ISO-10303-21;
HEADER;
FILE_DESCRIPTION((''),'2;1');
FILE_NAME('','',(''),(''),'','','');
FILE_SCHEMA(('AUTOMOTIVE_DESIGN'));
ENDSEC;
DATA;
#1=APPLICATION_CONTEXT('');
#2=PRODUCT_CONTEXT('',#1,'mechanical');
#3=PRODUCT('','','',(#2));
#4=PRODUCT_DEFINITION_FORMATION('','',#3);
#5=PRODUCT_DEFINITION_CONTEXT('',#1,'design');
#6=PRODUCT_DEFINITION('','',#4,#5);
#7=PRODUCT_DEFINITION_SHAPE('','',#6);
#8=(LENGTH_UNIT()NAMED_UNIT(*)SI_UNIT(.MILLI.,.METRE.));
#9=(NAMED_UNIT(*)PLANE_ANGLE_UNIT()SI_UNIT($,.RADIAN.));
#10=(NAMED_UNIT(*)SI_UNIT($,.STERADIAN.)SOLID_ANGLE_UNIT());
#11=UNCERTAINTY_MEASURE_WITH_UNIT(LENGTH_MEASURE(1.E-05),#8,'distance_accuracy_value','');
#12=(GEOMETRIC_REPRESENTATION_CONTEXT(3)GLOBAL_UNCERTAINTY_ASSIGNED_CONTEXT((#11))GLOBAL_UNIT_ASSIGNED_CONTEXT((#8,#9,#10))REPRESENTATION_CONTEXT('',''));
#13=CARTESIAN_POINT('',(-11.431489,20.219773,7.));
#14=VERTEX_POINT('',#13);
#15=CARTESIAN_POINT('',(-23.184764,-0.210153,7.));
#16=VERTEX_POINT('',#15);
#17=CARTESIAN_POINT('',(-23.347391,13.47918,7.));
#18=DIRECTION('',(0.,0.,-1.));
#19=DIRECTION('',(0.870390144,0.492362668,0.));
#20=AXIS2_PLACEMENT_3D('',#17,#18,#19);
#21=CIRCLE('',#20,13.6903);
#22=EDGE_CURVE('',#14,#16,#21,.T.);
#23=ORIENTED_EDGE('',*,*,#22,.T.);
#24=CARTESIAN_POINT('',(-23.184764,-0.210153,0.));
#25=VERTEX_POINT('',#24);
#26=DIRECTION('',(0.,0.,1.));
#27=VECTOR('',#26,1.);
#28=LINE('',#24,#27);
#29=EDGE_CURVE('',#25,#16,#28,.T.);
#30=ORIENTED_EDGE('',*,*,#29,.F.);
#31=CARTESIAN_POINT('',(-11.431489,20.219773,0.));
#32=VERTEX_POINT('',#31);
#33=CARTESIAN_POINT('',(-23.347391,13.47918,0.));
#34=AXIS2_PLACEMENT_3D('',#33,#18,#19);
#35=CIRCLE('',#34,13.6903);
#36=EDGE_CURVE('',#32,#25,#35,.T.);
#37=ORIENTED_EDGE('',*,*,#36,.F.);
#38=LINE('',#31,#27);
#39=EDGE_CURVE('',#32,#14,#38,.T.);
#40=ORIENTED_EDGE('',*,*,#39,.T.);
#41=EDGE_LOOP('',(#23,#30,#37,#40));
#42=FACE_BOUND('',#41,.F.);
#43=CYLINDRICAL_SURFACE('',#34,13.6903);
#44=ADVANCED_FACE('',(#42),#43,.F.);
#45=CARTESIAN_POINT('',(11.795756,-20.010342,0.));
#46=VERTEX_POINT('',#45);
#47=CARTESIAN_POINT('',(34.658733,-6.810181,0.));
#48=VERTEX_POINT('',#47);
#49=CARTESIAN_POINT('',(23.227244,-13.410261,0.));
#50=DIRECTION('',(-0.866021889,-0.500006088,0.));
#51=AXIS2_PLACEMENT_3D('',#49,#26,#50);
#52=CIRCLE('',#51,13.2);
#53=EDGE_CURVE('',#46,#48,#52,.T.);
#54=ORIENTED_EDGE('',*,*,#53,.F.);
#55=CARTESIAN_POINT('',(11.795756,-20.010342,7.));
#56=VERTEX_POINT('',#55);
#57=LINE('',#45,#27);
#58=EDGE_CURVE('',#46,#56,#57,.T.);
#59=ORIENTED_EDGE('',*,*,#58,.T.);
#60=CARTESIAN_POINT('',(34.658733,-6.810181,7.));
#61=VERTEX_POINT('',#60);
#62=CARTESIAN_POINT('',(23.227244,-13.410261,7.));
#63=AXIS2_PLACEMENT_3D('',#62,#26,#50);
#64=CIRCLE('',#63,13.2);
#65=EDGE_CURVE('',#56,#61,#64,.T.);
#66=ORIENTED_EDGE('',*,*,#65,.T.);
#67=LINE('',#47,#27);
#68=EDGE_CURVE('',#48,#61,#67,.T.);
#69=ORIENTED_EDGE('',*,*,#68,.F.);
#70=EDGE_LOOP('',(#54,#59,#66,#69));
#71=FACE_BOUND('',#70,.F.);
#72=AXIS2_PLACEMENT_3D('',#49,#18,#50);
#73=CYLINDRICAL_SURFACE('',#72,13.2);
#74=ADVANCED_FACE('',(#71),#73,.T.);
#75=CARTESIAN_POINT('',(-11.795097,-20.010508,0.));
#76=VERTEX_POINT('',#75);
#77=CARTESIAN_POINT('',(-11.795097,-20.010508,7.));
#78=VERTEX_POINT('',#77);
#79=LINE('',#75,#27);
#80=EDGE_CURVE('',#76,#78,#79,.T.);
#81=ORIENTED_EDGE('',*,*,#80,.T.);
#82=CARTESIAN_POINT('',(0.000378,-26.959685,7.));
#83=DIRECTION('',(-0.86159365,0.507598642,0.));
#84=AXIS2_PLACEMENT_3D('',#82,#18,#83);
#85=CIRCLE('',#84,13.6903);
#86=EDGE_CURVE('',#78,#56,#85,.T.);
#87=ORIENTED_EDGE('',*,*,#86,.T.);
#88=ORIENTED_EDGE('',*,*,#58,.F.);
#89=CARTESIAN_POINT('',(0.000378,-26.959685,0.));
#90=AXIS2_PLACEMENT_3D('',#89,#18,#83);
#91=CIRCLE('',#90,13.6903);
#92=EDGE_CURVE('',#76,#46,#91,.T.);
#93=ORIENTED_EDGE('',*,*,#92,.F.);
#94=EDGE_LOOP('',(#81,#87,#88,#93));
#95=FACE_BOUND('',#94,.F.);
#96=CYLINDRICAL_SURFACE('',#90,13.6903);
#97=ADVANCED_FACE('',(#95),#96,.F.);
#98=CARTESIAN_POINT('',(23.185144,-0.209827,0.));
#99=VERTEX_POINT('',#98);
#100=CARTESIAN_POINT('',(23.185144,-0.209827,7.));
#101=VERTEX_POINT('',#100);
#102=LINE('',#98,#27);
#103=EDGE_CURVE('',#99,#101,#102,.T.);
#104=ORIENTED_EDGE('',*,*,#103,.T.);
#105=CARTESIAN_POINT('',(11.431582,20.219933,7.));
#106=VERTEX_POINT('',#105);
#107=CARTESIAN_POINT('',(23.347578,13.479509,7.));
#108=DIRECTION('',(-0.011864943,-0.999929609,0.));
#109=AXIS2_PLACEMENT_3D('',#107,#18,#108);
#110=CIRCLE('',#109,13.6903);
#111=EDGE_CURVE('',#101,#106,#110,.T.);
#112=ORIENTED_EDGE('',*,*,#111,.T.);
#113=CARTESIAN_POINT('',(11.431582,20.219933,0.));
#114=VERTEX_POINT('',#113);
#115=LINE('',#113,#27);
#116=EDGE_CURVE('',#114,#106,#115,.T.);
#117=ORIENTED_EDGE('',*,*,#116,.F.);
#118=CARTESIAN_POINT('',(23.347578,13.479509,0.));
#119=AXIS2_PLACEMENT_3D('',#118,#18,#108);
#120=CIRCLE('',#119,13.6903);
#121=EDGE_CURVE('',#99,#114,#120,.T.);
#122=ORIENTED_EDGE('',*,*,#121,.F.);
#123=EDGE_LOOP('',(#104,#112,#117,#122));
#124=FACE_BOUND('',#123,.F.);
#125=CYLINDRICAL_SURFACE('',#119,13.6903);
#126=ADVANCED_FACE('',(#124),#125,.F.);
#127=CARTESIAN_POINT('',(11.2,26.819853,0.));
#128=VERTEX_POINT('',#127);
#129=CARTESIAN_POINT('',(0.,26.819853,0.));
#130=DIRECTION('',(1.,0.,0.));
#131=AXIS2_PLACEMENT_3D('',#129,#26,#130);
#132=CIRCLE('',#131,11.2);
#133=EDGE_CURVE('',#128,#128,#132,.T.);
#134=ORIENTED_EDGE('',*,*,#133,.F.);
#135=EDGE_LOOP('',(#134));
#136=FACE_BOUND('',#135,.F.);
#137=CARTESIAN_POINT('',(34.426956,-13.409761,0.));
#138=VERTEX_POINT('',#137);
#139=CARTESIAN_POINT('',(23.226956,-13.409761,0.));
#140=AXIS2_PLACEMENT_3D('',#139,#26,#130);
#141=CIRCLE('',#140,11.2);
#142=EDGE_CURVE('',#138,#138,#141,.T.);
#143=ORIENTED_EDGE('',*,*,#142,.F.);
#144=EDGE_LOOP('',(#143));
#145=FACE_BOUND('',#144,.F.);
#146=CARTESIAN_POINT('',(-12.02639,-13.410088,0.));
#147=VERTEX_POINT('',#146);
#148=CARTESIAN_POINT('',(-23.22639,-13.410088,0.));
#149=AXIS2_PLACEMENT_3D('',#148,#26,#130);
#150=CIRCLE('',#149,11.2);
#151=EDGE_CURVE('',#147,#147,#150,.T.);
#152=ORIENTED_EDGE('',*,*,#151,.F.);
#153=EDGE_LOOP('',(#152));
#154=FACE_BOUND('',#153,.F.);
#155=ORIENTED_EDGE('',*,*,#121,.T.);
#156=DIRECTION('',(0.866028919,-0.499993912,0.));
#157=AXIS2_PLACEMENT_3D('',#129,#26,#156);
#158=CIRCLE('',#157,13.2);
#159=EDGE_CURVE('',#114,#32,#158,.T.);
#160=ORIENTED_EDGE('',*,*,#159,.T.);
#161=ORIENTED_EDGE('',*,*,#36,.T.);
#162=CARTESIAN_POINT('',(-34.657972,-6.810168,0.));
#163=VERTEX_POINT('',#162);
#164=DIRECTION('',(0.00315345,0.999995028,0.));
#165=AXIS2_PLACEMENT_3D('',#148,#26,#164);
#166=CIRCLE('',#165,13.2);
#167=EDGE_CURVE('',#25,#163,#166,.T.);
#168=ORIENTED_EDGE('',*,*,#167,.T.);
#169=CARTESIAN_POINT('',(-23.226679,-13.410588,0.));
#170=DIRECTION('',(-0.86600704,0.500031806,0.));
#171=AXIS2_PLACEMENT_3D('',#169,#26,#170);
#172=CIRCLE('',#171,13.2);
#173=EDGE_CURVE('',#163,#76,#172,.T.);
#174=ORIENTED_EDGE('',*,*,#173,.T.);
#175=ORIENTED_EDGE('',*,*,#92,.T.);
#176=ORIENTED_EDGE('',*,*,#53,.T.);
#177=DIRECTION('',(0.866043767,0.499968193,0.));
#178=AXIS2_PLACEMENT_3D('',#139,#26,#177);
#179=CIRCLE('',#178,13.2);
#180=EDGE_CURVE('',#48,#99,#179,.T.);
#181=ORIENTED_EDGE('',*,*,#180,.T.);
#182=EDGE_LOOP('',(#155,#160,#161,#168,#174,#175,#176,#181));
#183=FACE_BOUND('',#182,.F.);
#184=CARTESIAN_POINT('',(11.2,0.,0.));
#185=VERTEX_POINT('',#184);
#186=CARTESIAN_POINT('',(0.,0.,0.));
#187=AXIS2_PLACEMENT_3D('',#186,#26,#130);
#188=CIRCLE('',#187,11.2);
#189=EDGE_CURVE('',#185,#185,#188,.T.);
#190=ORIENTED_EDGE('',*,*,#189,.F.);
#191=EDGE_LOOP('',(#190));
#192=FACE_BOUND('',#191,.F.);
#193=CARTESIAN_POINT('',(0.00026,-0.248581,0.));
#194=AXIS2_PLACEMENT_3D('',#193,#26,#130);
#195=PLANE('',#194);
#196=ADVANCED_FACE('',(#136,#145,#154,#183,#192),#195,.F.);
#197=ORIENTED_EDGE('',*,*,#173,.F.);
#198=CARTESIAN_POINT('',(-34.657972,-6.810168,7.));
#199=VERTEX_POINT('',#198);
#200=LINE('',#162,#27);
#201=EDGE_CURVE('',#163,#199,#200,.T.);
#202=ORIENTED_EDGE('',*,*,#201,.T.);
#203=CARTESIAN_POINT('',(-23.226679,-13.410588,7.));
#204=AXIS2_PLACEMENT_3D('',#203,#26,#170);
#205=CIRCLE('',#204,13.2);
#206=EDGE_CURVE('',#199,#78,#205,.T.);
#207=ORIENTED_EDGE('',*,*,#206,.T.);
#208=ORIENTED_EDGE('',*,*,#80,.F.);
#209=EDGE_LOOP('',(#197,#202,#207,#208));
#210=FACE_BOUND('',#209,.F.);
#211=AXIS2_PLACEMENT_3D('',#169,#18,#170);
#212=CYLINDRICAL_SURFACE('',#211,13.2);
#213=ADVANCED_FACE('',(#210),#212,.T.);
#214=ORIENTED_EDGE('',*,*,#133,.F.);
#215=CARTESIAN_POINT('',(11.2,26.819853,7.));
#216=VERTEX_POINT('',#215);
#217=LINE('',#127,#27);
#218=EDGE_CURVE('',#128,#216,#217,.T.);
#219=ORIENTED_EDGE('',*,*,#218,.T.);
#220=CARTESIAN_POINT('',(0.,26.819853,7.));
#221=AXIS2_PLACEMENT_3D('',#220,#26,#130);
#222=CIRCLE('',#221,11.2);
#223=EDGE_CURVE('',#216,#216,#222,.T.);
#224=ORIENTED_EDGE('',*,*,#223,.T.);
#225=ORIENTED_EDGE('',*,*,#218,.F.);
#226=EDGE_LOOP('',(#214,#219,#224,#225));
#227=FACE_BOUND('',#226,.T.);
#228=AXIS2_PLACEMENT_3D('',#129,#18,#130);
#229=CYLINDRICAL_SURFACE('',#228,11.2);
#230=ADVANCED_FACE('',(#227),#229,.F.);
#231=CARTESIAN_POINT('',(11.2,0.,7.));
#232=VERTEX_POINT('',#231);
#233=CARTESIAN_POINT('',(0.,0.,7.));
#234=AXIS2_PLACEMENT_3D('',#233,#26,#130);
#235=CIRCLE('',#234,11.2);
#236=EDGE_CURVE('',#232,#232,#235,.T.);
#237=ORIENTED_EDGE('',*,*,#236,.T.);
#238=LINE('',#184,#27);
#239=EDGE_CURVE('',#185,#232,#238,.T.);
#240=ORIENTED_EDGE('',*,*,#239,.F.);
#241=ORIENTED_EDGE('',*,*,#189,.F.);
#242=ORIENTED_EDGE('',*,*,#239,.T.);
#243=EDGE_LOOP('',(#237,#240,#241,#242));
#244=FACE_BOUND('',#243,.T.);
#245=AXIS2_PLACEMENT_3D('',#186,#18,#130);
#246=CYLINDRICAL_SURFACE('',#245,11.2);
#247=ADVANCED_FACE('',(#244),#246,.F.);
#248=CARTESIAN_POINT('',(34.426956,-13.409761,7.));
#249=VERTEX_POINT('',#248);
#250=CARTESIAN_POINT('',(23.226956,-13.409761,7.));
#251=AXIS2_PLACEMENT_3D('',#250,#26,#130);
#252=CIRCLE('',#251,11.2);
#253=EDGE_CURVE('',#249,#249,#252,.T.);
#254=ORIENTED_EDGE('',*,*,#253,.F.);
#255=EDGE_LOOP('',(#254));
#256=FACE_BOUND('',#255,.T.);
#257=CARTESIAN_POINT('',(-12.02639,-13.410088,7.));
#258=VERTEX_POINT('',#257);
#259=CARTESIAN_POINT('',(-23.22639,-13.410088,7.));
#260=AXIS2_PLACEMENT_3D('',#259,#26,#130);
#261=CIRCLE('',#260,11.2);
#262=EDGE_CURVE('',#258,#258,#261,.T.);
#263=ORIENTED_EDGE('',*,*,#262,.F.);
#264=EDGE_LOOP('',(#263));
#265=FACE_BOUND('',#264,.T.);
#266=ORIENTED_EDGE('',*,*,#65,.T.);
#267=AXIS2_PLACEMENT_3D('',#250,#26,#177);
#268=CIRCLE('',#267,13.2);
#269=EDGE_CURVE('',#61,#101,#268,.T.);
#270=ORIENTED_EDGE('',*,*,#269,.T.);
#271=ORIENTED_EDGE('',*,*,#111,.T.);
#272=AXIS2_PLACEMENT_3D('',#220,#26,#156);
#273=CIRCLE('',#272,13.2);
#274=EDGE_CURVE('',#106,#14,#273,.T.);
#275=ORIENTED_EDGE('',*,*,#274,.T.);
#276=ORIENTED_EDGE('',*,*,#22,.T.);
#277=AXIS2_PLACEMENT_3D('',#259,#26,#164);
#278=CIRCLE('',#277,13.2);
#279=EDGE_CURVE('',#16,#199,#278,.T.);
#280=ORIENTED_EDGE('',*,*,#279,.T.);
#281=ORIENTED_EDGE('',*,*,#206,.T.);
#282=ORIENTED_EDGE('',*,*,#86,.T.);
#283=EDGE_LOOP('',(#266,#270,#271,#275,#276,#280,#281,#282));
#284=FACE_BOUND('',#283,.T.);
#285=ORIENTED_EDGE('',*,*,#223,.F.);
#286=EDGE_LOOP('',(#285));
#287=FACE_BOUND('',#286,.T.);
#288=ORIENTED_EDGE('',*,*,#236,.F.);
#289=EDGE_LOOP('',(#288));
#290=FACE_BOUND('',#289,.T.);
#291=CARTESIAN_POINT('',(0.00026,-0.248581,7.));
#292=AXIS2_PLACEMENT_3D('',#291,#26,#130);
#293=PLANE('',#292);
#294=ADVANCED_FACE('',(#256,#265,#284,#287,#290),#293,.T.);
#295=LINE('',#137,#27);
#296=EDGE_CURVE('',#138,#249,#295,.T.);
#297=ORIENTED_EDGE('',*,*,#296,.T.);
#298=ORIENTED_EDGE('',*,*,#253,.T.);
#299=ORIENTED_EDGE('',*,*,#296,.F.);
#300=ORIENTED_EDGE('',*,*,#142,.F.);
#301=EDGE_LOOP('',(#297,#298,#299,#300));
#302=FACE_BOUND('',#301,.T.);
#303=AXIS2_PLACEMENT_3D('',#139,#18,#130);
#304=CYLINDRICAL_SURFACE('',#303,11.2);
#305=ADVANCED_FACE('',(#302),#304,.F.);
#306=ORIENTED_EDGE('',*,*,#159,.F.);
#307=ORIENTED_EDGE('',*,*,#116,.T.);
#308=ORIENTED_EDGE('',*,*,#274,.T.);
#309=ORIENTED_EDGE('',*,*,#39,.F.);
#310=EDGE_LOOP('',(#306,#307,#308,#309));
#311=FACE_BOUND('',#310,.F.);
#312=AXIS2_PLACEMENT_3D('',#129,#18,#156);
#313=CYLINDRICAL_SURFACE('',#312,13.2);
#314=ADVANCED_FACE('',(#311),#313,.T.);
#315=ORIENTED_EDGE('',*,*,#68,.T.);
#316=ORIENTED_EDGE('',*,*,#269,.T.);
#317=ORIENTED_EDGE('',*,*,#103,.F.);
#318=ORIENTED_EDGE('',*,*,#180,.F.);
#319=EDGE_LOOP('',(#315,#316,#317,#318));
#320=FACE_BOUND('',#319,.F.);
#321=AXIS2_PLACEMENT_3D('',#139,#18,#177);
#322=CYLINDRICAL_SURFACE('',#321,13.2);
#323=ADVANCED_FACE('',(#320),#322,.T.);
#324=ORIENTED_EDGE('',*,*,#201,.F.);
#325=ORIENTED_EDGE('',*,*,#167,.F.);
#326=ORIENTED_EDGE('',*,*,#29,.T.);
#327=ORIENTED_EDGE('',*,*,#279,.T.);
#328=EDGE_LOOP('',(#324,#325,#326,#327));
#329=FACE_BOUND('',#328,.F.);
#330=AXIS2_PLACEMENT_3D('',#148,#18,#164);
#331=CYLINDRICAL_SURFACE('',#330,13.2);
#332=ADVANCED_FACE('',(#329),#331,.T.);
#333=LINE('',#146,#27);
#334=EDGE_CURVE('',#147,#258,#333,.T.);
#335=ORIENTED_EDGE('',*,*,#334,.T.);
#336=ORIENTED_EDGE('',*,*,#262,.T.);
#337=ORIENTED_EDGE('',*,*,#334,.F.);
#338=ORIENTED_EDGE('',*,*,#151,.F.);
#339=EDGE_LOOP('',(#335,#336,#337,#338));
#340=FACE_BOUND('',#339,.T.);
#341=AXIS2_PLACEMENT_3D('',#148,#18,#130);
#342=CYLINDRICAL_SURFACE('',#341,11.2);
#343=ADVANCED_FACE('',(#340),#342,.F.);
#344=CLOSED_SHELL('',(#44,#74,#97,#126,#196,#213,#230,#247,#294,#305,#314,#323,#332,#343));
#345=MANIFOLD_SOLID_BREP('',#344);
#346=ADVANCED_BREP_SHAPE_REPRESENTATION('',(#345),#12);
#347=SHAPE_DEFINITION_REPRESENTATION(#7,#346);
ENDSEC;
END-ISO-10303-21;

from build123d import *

# Parameters (mm, degrees)
F0_R     = 11.2
F1_DEPTH = 7


# Not quite as in the source:
# - ends of sketch curves that miss each other by under 0.0002 mm in the source are joined


with BuildPart() as f1:
    # F0 (on Top) → F1 (new body)
    with BuildSketch(Plane.XY):
        with BuildLine():
            ThreePointArc((23.1851437087, -0.209827322), (11.4809905002, 6.6524743947), (11.4315817283, 20.219933477))
            ThreePointArc((11.4315817283, 20.219933477), (-9.27972e-05, 40.0198531118), (-11.4314889311, 20.2197727475))
            ThreePointArc((-11.4314889311, 20.2197727475), (-11.4807071504, 6.6523126094), (-23.1847645, -0.2101533167))
            ThreePointArc((-23.1847645, -0.2101533167), (-29.8083976457, -1.9681833019), (-34.6579717698, -6.8101680492))
            ThreePointArc((-34.6579717698, -6.8101680492), (-29.8265597829, -24.8415250126), (-11.7950971191, -20.0105075285))
            ThreePointArc((-11.7950971191, -20.0105075285), (0.0002818311, -13.2693854266), (11.7957555615, -20.0103416826))
            ThreePointArc((11.7957555615, -20.0103416826), (29.8270373152, -24.8412493105), (34.6587334242, -6.8101809544))
            ThreePointArc((34.6587334242, -6.8101809544), (29.8271641282, -1.97867959), (23.2271516953, -0.2102613183))
            ThreePointArc((23.2271516953, -0.2102613183), (23.2061475356, -0.2100604335), (23.1851437087, -0.209827322))
        make_face()
        with Locations((-23.2263900417, -13.4100876845)):
            Circle(F0_R, mode=Mode.SUBTRACT)
        Circle(F0_R, mode=Mode.SUBTRACT)
        with Locations((23.2269557018, -13.4097611005)):
            Circle(F0_R, mode=Mode.SUBTRACT)
        with Locations((0, 26.8198531121)):
            Circle(F0_R, mode=Mode.SUBTRACT)
        with BuildLine():
            ThreePointArc((34.6587334242, -6.8101809544), (29.8090523926, -1.967907966), (23.1851437087, -0.209827322))
            ThreePointArc((23.1851437087, -0.209827322), (23.2061475356, -0.2100604335), (23.2271516953, -0.2102613183))
            ThreePointArc((23.2271516953, -0.2102613183), (29.8271641282, -1.97867959), (34.6587334242, -6.8101809544))
        make_face()
        with BuildLine():
            ThreePointArc((11.7957555615, -20.0103416826), (29.8273248567, -24.8417502494), (34.6587334242, -6.8101809544))
            ThreePointArc((34.6587334242, -6.8101809544), (29.8270373152, -24.8412493105), (11.7957555615, -20.0103416826))
        make_face()
        with BuildLine():
            ThreePointArc((-11.7950971191, -20.0105075285), (-29.8265597829, -24.8415250126), (-34.6579717698, -6.8101680492))
            ThreePointArc((-34.6579717698, -6.8101680492), (-29.8268485886, -24.8420252216), (-11.7950971191, -20.0105075285))
        make_face()
    extrude(amount=F1_DEPTH)


solid = f1.part
